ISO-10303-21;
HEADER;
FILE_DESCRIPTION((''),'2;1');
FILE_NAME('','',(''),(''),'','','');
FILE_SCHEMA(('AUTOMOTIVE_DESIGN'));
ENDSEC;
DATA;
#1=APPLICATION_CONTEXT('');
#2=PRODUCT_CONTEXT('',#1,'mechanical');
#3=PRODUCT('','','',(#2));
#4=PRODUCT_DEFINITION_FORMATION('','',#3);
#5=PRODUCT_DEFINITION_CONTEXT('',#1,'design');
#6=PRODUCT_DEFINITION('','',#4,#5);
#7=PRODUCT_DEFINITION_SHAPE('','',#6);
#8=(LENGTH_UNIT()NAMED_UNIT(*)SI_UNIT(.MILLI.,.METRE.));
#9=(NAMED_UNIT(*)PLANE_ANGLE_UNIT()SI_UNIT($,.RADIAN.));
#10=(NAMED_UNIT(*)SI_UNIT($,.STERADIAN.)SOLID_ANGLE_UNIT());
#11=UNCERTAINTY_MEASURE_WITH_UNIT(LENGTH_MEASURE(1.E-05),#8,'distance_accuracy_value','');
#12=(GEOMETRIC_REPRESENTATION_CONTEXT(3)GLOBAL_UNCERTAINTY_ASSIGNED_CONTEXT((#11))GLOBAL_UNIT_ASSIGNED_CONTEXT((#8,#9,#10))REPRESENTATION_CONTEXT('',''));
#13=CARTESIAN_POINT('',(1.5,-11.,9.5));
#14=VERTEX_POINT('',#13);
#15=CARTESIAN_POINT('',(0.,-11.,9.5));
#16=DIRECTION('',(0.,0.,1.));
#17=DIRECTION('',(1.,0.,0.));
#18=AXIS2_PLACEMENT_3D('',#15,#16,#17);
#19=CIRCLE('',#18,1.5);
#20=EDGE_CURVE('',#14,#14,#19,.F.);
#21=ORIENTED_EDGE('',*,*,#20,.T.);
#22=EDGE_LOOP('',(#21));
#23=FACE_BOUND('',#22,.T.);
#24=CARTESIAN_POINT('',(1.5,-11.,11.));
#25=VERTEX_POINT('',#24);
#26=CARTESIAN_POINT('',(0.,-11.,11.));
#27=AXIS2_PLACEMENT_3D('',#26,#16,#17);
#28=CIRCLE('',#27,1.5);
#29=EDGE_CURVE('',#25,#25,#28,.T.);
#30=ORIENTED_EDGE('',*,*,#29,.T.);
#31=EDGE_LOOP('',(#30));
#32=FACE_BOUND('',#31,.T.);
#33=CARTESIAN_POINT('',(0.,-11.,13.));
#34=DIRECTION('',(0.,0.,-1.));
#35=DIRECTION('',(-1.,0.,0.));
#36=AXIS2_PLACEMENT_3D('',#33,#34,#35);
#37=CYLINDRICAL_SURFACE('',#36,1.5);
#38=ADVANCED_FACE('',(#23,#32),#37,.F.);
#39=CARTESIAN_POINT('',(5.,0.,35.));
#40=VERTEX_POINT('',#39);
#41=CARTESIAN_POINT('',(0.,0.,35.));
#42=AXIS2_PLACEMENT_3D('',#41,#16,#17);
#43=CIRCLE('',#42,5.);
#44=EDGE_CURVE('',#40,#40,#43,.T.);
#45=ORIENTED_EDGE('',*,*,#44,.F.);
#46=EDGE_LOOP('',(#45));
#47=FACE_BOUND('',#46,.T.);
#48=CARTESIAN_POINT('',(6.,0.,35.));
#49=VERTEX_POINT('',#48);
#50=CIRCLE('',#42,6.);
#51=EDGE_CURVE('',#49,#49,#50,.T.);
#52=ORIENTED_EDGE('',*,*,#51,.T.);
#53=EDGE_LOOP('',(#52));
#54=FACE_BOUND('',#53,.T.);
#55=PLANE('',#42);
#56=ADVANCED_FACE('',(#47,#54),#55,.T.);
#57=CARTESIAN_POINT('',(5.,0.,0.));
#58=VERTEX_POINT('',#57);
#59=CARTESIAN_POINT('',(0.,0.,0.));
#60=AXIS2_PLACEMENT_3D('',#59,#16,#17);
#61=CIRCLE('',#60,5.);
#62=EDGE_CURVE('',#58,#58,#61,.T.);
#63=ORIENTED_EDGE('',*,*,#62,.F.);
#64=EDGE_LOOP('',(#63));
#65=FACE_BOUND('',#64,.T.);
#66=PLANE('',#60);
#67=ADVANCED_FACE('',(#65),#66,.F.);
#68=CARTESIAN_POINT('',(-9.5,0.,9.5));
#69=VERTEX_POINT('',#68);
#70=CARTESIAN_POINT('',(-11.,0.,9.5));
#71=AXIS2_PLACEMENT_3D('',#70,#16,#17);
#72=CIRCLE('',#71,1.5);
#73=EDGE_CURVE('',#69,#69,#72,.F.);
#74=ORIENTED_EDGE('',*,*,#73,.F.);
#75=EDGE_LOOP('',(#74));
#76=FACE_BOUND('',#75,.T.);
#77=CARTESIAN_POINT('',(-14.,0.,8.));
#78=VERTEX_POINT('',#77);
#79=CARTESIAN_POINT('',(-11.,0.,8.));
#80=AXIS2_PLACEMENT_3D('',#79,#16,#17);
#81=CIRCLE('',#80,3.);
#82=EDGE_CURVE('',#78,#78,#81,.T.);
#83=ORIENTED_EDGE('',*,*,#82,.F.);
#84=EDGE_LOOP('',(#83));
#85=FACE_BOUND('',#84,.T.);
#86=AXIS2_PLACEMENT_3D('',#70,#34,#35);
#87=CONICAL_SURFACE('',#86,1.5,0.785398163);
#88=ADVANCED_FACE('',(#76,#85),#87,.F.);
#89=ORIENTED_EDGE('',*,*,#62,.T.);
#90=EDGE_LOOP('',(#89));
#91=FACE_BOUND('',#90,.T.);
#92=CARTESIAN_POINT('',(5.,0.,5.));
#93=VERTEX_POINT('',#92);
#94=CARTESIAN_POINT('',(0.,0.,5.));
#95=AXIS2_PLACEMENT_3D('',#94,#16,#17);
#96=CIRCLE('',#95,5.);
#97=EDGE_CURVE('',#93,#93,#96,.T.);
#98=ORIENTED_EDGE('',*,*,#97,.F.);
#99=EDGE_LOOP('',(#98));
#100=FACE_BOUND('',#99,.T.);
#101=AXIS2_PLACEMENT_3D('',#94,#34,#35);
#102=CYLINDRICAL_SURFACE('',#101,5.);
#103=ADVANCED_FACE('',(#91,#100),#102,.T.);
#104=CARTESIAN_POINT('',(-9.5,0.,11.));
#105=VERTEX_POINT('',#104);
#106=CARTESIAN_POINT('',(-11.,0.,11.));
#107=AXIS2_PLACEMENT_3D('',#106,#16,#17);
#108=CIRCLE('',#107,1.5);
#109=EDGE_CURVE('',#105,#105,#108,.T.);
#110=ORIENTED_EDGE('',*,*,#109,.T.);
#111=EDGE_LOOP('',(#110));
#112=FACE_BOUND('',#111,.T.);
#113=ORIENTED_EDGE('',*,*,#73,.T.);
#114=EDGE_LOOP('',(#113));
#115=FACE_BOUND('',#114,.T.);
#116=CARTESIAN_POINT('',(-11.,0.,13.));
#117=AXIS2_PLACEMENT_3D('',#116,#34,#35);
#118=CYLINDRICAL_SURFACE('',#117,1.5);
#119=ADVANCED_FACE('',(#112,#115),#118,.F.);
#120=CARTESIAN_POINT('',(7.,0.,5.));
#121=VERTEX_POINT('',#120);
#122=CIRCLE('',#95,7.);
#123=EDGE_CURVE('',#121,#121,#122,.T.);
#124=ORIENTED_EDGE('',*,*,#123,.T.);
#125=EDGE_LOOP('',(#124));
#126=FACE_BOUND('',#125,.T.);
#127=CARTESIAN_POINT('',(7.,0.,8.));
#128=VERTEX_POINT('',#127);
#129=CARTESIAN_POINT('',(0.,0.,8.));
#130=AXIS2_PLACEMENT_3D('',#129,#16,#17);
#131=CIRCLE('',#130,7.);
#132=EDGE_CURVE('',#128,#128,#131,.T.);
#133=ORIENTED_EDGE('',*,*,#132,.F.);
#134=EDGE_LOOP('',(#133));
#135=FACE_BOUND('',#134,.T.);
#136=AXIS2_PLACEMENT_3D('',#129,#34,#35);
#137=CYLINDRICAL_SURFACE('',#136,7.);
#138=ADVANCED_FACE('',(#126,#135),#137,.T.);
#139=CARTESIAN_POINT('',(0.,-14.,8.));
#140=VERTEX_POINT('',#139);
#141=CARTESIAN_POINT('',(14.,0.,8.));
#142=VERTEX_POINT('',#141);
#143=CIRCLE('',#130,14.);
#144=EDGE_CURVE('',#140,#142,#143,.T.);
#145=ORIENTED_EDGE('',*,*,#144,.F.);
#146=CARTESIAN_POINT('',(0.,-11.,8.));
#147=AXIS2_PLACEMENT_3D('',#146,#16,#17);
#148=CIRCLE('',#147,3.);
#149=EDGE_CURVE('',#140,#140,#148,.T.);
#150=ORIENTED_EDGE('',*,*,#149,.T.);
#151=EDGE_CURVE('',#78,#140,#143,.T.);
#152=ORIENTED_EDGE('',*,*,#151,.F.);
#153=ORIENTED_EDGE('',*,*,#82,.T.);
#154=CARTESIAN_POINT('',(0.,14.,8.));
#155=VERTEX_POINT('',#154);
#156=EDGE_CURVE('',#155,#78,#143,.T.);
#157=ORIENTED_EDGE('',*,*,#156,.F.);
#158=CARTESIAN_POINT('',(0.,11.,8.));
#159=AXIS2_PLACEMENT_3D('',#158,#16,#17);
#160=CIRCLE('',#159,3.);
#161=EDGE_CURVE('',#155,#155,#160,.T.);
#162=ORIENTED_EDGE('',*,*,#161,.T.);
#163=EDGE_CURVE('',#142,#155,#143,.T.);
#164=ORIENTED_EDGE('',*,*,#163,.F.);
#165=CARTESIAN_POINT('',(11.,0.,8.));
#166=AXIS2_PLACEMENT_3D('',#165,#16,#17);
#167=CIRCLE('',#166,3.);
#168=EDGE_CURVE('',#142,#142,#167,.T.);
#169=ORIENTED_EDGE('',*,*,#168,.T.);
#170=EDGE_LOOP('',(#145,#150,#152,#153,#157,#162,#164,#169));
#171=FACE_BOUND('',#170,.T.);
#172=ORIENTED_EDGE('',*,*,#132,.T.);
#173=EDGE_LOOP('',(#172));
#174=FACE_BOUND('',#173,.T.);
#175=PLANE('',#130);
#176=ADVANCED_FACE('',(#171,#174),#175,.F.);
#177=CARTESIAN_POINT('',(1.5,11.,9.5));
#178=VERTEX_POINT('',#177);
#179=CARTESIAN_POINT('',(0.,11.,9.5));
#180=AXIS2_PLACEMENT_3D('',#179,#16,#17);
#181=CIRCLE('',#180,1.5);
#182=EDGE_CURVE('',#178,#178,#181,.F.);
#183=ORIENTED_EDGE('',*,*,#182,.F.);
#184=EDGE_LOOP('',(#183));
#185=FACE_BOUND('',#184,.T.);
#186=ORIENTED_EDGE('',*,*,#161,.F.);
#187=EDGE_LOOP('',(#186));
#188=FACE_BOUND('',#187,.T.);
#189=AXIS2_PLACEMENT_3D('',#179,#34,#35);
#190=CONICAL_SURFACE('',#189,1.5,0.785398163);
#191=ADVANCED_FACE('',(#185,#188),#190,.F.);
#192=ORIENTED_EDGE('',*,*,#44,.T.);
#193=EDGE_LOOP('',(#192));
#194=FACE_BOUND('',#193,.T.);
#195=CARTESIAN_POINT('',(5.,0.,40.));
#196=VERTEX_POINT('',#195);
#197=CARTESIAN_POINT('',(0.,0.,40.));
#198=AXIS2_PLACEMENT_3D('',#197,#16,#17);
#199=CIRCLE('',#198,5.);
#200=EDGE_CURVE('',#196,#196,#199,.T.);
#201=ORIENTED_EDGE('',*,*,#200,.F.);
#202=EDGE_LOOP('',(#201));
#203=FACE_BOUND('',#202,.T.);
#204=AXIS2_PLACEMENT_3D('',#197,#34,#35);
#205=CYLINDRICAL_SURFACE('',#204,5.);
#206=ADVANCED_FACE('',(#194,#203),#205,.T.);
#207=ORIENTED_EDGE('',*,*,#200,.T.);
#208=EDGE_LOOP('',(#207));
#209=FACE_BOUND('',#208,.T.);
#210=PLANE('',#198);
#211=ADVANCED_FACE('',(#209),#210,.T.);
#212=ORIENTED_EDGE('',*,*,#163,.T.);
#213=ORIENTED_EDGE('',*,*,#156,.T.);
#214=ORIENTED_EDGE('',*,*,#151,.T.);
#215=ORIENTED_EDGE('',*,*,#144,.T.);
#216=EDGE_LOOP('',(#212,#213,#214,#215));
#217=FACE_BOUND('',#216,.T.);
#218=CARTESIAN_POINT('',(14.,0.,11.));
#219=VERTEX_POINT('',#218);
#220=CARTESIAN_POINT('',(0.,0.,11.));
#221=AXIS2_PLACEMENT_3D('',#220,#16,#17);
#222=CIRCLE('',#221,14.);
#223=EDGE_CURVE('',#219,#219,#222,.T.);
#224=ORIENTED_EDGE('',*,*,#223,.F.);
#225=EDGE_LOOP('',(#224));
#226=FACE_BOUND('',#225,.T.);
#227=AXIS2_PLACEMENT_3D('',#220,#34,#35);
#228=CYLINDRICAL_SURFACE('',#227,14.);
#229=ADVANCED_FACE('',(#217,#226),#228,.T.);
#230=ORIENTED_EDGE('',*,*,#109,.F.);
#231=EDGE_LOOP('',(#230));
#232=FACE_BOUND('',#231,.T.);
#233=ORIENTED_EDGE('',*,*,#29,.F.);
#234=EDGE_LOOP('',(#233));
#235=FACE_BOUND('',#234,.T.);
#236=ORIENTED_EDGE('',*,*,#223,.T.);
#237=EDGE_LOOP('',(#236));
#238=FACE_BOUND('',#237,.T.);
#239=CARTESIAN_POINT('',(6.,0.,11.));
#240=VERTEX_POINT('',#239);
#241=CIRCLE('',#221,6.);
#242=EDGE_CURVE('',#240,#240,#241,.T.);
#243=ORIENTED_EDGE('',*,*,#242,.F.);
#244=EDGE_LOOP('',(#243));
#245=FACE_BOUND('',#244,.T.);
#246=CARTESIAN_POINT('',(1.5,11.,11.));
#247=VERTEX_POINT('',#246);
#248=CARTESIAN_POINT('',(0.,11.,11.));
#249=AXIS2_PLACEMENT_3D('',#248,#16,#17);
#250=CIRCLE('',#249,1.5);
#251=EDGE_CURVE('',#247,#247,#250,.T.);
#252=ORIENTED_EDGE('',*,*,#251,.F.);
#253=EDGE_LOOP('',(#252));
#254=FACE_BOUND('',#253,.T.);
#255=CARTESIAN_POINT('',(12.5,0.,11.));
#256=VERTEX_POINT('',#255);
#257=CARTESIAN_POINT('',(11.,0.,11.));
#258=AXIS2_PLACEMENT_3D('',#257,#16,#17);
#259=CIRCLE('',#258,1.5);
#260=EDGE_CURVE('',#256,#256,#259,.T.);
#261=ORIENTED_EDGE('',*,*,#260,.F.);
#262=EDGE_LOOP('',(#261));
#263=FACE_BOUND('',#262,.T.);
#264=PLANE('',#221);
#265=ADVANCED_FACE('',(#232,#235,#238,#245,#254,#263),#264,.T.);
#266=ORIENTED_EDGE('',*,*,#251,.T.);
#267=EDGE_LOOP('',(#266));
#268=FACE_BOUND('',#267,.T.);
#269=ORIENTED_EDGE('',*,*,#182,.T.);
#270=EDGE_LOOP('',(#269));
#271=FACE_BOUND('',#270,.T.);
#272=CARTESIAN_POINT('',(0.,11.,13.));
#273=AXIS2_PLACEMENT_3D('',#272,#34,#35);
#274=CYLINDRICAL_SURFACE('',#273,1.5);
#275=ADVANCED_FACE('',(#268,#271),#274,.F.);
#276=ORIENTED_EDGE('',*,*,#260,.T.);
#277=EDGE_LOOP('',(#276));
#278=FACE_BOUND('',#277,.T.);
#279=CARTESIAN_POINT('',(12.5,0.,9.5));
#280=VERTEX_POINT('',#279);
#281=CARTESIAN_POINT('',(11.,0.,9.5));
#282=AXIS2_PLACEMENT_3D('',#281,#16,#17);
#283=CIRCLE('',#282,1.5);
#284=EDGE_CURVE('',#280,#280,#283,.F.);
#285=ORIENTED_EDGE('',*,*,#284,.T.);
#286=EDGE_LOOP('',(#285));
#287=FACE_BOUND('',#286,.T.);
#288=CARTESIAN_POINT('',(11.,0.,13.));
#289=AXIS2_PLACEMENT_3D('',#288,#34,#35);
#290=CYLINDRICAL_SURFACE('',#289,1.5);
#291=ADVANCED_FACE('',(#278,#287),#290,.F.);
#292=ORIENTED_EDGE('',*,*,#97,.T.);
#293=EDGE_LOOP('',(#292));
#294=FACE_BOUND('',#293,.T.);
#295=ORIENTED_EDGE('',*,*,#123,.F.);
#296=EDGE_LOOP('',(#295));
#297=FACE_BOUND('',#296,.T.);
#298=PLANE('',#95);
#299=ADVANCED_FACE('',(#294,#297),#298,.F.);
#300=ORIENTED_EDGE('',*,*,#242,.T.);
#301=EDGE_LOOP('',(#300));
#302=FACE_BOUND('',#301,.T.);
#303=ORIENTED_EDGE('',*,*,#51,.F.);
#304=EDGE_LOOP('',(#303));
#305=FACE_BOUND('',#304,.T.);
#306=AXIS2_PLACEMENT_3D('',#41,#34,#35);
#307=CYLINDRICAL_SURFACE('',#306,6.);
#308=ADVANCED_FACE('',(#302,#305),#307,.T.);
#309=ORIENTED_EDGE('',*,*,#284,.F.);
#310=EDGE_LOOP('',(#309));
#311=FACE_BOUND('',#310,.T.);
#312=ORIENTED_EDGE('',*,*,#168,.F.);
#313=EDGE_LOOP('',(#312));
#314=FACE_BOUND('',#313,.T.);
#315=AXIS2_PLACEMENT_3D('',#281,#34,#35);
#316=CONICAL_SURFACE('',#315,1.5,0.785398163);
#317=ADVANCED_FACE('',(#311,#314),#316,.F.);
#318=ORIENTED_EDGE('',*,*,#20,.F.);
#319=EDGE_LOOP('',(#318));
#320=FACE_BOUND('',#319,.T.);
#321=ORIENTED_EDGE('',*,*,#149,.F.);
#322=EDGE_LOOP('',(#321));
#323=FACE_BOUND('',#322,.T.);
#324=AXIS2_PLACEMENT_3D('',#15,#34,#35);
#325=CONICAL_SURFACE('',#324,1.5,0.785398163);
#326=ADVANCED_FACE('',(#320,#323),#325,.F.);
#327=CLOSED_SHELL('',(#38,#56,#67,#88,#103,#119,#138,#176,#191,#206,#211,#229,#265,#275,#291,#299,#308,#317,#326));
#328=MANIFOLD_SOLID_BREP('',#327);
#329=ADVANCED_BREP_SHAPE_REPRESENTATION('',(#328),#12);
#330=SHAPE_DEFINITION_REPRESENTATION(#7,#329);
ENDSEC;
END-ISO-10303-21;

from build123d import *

# Parameters (mm, degrees)
CROQUIS1_R              = 5
SALIENTE_EXTRUIR1_DEPTH = 5
CROQUIS2_R              = 7
SALIENTE_EXTRUIR2_DEPTH = 3
CROQUIS3_R              = 14
SALIENTE_EXTRUIR3_DEPTH = 3
CROQUIS4_R              = 6
SALIENTE_EXTRUIR4_DEPTH = 24
CROQUIS5_R              = 5
SALIENTE_EXTRUIR5_DEPTH = 5
CROQUIS6_R              = 1.5
CORTAR_EXTRUIR1_DEPTH   = 5
CHAFL_N1_SIZE           = 1.5


with BuildPart() as part:
    # Croquis1 → Saliente-Extruir1 (new body)
    with BuildSketch(Plane.XY):
        Circle(CROQUIS1_R)
    extrude(amount=SALIENTE_EXTRUIR1_DEPTH)

    # Croquis2 → Saliente-Extruir2 (add)
    with BuildSketch(Plane.XY.offset(5)):
        Circle(CROQUIS2_R)
    extrude(amount=SALIENTE_EXTRUIR2_DEPTH)

    # Croquis3 → Saliente-Extruir3 (add)
    with BuildSketch(Plane.XY.offset(8)):
        Circle(CROQUIS3_R)
    extrude(amount=SALIENTE_EXTRUIR3_DEPTH)

    # Croquis4 → Saliente-Extruir4 (add)
    with BuildSketch(Plane.XY.offset(11)):
        Circle(CROQUIS4_R)
    extrude(amount=SALIENTE_EXTRUIR4_DEPTH)

    # Croquis5 → Saliente-Extruir5 (add)
    with BuildSketch(Plane.XY.offset(35)):
        Circle(CROQUIS5_R)
    extrude(amount=SALIENTE_EXTRUIR5_DEPTH)

    # Croquis6 → Cortar-Extruir1 (cut)
    with BuildSketch(Plane(origin=(0, 0, 8), x_dir=(-1, 0, 0), z_dir=(0, 0, -1))):
        with Locations((11, 0)):
            Circle(CROQUIS6_R)
        with Locations((0, -11)):
            Circle(CROQUIS6_R)
        with Locations((-11, 0)):
            Circle(CROQUIS6_R)
        with Locations((0, 11)):
            Circle(CROQUIS6_R)
    extrude(amount=-CORTAR_EXTRUIR1_DEPTH, mode=Mode.SUBTRACT)

    # Chaflán1
    chafl_n1_edges = [part.edges().sort_by_distance(p)[0] for p in [
        (-9.5, 0, 8),
        (1.5, -11, 8),
        (12.5, 0, 8),
        (1.5, 11, 8),
    ]]
    chamfer(chafl_n1_edges, length=CHAFL_N1_SIZE - 0.0001)  # a hair under: the kernel refuses the full size


solid = part.part
